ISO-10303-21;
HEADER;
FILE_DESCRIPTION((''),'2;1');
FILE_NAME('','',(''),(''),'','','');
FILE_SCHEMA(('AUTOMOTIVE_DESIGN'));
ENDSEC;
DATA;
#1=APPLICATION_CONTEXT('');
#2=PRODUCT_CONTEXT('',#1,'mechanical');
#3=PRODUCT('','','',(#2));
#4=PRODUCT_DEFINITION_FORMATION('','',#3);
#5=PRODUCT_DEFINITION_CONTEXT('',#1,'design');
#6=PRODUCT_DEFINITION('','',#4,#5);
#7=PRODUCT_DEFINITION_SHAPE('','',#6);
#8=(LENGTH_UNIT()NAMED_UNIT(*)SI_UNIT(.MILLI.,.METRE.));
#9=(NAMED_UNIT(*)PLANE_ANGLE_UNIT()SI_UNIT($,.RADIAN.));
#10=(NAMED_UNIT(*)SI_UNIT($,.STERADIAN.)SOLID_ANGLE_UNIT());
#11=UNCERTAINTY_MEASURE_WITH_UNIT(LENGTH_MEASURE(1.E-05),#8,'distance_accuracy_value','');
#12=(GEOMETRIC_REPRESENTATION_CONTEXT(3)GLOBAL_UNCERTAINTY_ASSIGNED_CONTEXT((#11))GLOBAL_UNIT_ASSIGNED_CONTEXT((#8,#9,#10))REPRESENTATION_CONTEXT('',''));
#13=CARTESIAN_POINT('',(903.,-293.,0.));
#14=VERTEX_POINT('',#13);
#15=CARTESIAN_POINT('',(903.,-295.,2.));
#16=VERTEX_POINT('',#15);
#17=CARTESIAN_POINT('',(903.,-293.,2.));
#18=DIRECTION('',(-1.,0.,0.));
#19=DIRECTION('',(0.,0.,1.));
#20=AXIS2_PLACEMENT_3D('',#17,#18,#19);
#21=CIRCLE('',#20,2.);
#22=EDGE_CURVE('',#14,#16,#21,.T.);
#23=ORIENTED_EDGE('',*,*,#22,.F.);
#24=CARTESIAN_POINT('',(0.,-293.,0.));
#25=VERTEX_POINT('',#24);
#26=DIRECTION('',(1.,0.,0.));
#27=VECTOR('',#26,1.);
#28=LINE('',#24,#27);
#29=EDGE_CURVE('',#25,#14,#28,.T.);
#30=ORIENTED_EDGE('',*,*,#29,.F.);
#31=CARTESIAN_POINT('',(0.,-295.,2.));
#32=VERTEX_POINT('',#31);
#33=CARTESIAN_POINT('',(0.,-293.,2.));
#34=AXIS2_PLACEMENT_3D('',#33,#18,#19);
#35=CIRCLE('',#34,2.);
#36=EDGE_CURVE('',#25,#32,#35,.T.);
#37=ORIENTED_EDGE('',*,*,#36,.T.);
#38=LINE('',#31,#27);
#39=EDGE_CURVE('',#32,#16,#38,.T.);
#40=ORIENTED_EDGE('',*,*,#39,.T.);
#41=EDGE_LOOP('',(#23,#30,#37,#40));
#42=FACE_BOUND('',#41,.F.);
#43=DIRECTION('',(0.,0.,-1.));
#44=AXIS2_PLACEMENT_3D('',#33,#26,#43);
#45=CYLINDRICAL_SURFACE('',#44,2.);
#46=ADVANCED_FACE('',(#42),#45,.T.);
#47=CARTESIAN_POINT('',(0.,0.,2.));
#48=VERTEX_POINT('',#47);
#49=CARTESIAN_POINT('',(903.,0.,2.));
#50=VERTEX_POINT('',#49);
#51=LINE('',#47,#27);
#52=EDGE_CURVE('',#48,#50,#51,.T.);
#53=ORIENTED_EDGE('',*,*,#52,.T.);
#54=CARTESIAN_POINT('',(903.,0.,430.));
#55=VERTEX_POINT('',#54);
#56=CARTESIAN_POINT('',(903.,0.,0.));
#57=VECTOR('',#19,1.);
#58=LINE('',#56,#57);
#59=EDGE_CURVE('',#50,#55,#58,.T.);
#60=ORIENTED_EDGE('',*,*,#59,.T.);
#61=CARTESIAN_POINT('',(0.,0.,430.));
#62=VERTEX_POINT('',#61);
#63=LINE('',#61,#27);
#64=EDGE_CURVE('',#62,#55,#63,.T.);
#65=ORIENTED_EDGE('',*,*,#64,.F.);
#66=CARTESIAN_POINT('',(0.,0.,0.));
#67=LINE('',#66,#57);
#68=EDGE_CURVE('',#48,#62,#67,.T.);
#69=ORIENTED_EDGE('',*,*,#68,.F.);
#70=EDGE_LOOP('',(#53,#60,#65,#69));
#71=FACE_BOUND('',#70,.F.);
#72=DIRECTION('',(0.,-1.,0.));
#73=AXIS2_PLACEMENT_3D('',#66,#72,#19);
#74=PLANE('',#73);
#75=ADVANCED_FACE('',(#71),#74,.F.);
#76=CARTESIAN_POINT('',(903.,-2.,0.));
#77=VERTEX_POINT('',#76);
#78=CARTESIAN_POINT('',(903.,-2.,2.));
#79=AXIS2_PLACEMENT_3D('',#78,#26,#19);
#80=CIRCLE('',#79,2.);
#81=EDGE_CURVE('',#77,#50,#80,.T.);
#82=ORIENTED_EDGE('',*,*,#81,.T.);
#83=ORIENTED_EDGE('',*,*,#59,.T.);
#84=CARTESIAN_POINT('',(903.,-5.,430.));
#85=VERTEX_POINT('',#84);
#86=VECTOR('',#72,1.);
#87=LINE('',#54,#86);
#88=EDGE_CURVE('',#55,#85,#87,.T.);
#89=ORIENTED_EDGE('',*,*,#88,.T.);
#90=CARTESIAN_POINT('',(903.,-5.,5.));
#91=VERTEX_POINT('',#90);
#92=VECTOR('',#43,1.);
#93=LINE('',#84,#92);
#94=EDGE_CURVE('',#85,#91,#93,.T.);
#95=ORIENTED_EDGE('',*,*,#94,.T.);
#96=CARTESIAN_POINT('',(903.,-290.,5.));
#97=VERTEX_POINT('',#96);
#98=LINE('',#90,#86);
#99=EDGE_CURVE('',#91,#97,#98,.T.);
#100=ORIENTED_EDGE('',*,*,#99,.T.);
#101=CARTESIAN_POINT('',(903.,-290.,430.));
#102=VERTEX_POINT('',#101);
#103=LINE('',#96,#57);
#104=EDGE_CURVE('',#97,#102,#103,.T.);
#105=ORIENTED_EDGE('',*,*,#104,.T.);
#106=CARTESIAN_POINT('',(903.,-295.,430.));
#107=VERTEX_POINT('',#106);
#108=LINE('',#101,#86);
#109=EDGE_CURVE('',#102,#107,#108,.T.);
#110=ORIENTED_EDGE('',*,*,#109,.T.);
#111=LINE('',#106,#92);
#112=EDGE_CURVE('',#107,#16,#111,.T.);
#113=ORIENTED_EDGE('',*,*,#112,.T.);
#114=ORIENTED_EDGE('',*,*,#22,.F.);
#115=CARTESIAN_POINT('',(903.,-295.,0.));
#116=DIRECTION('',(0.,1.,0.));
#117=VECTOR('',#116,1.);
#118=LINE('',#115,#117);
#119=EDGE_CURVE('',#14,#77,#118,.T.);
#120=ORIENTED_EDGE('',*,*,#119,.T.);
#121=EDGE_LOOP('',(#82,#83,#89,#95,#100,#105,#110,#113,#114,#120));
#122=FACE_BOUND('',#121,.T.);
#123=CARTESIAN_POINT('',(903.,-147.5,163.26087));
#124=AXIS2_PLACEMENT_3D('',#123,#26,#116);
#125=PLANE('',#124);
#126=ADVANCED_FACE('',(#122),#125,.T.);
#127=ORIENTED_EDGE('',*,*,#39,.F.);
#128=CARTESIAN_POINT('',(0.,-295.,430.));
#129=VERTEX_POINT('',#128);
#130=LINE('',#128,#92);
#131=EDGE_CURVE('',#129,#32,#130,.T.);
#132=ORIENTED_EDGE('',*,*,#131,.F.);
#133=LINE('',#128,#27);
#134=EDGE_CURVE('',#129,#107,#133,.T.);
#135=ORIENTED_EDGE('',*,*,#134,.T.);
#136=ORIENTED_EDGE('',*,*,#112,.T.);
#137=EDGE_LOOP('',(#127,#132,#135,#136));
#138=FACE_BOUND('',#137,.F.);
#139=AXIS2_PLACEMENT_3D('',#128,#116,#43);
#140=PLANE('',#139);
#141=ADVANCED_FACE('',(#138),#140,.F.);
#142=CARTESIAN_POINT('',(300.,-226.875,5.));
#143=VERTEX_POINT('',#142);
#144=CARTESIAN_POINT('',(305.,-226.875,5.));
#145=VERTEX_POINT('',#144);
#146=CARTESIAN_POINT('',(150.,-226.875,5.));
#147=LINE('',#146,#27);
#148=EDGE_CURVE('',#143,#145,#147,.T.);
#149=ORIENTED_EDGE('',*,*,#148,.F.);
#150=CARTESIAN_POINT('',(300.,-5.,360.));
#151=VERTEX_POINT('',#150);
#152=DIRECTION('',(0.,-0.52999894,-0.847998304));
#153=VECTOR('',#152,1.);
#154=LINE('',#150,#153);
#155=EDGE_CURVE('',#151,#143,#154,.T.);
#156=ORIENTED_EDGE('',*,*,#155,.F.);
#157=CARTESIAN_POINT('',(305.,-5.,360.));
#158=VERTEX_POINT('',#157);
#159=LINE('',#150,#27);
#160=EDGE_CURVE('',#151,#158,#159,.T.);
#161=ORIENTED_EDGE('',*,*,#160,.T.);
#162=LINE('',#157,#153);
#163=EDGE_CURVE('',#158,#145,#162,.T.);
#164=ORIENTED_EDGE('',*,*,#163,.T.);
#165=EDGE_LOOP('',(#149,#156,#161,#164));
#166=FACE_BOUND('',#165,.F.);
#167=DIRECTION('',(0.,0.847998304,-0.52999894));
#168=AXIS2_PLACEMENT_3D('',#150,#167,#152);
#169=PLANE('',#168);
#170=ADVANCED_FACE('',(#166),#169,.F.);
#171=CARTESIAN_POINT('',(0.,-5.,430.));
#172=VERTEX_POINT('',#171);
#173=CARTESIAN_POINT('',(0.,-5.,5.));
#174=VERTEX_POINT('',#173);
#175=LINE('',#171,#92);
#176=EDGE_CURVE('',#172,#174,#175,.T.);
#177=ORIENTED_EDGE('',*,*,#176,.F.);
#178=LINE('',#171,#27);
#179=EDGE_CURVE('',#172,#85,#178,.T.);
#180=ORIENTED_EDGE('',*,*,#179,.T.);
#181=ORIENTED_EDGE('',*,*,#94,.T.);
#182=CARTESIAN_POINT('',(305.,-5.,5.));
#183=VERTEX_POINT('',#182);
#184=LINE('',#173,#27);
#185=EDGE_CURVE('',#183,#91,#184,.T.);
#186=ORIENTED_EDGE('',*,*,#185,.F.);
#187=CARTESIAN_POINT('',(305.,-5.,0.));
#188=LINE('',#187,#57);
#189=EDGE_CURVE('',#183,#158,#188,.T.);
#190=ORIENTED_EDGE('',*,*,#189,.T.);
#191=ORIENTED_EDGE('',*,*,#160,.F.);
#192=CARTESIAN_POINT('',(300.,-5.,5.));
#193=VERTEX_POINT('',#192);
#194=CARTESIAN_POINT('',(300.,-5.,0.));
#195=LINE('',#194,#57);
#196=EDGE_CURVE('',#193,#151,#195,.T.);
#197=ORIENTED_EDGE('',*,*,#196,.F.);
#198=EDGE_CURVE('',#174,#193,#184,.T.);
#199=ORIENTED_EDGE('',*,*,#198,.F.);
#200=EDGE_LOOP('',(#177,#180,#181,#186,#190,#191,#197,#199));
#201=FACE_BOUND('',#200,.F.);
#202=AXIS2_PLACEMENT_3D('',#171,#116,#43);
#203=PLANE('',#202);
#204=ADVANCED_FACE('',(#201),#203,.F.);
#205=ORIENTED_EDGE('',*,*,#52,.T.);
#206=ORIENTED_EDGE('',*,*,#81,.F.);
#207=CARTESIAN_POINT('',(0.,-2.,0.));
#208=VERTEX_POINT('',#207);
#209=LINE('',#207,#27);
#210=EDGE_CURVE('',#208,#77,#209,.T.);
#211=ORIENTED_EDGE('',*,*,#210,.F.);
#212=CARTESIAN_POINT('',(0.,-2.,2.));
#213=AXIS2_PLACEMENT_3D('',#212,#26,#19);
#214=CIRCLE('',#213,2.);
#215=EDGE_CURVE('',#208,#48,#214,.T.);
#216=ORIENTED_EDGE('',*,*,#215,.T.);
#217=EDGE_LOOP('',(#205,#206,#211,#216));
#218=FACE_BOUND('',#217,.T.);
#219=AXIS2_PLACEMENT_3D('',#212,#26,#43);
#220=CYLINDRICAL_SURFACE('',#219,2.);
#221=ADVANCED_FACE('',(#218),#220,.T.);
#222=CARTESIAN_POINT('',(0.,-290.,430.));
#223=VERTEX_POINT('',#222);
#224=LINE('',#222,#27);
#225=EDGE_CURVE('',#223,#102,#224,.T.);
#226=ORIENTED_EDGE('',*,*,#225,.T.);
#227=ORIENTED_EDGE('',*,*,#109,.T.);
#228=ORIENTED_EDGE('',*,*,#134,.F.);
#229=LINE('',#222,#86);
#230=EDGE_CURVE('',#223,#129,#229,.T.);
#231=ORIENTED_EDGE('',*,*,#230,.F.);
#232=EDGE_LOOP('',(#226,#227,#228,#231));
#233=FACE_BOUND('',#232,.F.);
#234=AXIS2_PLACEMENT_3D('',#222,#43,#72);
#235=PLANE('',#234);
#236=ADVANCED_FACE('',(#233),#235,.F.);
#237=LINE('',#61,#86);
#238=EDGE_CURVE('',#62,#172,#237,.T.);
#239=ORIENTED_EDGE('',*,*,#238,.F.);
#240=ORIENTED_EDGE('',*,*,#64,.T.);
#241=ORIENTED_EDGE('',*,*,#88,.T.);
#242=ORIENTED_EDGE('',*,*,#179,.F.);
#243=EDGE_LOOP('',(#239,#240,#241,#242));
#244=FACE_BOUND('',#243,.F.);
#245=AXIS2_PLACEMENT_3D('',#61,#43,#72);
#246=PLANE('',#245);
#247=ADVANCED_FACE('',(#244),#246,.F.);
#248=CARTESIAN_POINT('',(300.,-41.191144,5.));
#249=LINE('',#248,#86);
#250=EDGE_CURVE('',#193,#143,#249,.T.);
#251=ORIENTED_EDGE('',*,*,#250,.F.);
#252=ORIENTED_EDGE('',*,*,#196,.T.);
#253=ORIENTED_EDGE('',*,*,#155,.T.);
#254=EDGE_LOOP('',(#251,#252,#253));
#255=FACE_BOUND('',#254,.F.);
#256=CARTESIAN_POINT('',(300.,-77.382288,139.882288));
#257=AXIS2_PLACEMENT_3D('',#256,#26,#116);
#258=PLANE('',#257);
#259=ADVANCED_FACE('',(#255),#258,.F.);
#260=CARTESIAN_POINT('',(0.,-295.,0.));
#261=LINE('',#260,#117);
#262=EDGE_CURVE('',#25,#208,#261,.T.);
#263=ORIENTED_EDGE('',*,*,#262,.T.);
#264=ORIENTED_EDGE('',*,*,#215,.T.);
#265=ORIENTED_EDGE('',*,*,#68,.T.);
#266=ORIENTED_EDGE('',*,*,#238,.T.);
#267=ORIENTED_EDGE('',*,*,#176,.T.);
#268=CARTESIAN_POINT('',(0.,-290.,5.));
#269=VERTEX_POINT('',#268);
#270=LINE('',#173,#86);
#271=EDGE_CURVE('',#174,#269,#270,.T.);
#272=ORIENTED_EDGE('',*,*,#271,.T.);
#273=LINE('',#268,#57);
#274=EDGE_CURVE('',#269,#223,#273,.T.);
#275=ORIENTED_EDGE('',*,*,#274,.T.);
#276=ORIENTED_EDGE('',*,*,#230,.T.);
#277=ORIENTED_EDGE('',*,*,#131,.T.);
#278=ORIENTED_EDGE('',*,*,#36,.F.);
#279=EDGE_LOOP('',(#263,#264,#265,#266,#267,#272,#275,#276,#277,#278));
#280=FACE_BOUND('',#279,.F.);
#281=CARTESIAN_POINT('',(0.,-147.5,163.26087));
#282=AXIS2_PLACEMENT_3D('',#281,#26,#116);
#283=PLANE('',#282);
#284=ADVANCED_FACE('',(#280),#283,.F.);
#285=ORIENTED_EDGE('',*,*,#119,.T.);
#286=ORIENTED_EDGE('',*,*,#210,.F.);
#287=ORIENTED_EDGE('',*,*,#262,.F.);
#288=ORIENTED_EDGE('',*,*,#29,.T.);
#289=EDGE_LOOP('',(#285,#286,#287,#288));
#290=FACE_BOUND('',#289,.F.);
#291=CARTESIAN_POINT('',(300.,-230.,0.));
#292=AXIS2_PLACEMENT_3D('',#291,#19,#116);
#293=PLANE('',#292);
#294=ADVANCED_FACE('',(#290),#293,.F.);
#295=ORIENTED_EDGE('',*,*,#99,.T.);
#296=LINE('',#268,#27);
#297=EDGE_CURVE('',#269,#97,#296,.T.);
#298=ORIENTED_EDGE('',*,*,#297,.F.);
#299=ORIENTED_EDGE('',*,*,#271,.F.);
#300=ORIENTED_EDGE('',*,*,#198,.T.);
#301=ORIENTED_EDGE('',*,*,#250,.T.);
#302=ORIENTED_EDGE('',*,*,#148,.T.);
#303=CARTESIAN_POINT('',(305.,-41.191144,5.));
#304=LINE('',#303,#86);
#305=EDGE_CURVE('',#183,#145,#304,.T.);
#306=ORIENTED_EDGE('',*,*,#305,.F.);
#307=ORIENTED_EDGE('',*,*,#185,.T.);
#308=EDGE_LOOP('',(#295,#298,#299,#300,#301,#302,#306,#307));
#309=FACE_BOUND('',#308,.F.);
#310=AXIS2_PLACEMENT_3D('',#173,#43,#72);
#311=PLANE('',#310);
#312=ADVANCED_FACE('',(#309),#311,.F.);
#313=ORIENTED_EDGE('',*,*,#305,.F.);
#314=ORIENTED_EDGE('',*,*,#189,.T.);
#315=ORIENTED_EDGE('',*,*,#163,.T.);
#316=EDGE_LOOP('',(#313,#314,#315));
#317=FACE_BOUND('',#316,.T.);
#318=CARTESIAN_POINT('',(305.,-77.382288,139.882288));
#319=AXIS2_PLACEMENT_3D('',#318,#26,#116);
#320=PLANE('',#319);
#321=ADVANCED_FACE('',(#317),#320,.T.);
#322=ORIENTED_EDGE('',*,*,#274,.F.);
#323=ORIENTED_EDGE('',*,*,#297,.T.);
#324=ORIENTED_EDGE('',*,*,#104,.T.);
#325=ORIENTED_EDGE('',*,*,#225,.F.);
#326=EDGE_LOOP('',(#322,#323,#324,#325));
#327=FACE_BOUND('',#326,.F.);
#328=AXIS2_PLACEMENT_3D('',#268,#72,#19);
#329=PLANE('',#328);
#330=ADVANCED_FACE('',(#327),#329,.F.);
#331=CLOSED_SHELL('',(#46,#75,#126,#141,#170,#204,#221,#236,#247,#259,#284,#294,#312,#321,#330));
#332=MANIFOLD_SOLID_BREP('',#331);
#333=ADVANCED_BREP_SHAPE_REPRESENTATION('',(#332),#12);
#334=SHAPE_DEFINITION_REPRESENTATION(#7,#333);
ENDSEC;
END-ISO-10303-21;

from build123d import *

# Parameters (mm, degrees)
F1_DEPTH = 903
F4_DEPTH = 5
F5_R     = 2


# Not quite as in the source:
# - a feature names something its author has since deleted; it is built from what else it names


with BuildPart() as f1:
    # F0 (on Right) → F1 (new body)
    with BuildSketch(Plane.YZ):
        Polygon((-295, 0), (0, 0), (0, 430), (-5, 430), (-5, 5), (-290, 5), (-290, 430), (-295, 430), align=None)
    extrude(amount=F1_DEPTH)

    # F3 (on offset) → F4 (join)
    with BuildSketch(Plane.YZ.offset(300)):
        Polygon((-230, 0), (-5, 0), (-5, 360), align=None)
    extrude(amount=F4_DEPTH)

    # F5
    f5_edges = [f1.edges().sort_by_distance(p)[0] for p in [
        (451.5, 0, 0),
        (451.5, -295, 0),
    ]]
    fillet(f5_edges, radius=F5_R)


solid = f1.part
